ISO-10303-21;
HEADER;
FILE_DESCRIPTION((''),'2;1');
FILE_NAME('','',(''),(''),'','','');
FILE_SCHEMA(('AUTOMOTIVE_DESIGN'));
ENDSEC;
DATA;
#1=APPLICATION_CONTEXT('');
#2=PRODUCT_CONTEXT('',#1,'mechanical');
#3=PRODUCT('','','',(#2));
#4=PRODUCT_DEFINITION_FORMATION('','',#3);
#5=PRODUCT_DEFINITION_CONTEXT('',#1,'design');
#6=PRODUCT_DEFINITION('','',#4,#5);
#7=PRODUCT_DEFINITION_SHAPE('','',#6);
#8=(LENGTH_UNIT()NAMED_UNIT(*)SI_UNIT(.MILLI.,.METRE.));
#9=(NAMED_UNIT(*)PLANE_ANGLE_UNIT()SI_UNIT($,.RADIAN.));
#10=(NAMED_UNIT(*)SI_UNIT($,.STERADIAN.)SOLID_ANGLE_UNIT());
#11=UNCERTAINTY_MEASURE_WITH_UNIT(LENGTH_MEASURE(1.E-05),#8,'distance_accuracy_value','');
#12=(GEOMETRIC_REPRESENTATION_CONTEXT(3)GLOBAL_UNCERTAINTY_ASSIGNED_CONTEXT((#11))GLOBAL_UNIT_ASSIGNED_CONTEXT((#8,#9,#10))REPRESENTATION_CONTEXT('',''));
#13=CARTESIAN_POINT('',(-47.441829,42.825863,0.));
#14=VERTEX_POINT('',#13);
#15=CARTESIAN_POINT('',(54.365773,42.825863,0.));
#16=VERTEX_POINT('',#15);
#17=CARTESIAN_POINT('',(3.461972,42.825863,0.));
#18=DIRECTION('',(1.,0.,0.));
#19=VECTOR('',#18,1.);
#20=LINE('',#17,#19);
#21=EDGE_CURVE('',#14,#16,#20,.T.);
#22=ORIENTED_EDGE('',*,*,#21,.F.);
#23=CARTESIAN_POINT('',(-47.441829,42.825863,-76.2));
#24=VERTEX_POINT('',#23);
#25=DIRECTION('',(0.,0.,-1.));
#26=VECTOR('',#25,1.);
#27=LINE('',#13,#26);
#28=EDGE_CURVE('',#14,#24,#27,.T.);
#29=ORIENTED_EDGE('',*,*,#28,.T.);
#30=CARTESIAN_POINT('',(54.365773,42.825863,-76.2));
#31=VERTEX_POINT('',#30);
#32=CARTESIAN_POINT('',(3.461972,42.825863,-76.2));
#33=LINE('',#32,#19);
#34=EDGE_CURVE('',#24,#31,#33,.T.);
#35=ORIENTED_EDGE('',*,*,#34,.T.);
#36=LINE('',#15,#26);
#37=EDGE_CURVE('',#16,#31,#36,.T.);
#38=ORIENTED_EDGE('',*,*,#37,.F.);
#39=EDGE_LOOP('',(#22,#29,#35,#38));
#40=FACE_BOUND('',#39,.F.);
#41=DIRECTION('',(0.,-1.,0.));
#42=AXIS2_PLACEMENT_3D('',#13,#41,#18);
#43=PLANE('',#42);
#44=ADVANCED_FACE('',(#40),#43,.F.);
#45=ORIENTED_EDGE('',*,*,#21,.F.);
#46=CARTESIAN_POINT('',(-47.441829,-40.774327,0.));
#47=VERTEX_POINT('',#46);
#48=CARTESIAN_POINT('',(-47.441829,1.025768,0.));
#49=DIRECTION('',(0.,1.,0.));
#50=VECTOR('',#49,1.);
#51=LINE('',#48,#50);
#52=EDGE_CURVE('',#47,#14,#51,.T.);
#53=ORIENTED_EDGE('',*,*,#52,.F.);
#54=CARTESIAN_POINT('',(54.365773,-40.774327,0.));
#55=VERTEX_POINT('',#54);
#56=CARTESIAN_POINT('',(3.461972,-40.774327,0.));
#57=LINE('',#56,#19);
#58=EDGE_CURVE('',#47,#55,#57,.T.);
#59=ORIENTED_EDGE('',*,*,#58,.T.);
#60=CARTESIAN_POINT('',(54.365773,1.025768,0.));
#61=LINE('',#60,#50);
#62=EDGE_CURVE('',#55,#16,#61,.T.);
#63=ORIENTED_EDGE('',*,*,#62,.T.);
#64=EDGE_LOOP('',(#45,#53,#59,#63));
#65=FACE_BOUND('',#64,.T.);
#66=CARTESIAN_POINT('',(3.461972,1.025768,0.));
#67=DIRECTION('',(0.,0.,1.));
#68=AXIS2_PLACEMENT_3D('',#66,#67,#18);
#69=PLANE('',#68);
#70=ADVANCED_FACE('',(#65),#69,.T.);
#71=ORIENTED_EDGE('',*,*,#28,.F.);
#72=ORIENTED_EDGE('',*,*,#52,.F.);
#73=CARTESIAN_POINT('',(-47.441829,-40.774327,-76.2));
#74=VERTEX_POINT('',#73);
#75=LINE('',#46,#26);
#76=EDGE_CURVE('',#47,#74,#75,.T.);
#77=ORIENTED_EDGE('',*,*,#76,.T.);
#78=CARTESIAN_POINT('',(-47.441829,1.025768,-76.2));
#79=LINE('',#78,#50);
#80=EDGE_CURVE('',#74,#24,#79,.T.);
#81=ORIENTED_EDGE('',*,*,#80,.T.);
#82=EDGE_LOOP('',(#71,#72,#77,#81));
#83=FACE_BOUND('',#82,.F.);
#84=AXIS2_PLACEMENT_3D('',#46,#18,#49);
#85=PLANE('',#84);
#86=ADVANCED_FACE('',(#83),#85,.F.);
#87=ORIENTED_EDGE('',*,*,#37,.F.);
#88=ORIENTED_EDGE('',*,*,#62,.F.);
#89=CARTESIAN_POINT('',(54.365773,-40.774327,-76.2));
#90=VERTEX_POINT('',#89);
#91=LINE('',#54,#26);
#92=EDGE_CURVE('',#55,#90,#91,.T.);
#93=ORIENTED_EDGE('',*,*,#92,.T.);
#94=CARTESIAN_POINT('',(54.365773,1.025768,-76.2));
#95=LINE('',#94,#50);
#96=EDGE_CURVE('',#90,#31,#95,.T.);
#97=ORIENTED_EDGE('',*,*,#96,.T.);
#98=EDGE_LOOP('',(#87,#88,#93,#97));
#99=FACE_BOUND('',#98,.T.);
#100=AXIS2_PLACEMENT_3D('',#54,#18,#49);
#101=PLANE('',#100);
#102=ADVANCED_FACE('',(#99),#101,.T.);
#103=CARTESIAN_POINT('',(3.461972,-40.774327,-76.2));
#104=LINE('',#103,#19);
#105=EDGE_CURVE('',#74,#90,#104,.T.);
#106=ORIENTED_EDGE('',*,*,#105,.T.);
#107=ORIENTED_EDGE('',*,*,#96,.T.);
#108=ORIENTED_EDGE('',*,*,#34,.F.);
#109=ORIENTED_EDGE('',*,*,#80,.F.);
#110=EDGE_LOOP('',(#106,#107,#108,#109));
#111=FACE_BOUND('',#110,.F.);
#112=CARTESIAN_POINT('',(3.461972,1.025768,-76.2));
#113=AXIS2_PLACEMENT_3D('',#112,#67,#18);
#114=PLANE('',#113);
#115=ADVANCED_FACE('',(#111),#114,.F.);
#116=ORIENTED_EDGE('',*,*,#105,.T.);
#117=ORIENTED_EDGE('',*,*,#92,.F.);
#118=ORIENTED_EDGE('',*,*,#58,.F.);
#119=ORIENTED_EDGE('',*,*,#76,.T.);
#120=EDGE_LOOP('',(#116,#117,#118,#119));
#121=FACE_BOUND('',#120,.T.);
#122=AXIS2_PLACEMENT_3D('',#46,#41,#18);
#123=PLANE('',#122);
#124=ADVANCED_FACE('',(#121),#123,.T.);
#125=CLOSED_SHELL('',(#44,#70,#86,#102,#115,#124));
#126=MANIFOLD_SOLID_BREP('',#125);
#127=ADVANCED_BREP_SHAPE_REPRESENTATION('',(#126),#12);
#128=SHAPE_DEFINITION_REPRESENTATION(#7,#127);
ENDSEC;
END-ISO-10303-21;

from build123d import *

# Parameters (mm, degrees)
F0_W     = 101.8076017499
F0_H     = 83.6001895368
F5_DEPTH = 76.2


# Not quite as in the source:
# - a feature of the source that left no trace in its solid (it failed there, or was rolled back) is left out


with BuildPart() as f5:
    # F0 (on Top) → F5 (new body)
    with BuildSketch(Plane.XY):
        with Locations((3.461971879, 1.0257679969)):
            Rectangle(F0_W, F0_H)
    extrude(amount=-F5_DEPTH)


solid = f5.part
